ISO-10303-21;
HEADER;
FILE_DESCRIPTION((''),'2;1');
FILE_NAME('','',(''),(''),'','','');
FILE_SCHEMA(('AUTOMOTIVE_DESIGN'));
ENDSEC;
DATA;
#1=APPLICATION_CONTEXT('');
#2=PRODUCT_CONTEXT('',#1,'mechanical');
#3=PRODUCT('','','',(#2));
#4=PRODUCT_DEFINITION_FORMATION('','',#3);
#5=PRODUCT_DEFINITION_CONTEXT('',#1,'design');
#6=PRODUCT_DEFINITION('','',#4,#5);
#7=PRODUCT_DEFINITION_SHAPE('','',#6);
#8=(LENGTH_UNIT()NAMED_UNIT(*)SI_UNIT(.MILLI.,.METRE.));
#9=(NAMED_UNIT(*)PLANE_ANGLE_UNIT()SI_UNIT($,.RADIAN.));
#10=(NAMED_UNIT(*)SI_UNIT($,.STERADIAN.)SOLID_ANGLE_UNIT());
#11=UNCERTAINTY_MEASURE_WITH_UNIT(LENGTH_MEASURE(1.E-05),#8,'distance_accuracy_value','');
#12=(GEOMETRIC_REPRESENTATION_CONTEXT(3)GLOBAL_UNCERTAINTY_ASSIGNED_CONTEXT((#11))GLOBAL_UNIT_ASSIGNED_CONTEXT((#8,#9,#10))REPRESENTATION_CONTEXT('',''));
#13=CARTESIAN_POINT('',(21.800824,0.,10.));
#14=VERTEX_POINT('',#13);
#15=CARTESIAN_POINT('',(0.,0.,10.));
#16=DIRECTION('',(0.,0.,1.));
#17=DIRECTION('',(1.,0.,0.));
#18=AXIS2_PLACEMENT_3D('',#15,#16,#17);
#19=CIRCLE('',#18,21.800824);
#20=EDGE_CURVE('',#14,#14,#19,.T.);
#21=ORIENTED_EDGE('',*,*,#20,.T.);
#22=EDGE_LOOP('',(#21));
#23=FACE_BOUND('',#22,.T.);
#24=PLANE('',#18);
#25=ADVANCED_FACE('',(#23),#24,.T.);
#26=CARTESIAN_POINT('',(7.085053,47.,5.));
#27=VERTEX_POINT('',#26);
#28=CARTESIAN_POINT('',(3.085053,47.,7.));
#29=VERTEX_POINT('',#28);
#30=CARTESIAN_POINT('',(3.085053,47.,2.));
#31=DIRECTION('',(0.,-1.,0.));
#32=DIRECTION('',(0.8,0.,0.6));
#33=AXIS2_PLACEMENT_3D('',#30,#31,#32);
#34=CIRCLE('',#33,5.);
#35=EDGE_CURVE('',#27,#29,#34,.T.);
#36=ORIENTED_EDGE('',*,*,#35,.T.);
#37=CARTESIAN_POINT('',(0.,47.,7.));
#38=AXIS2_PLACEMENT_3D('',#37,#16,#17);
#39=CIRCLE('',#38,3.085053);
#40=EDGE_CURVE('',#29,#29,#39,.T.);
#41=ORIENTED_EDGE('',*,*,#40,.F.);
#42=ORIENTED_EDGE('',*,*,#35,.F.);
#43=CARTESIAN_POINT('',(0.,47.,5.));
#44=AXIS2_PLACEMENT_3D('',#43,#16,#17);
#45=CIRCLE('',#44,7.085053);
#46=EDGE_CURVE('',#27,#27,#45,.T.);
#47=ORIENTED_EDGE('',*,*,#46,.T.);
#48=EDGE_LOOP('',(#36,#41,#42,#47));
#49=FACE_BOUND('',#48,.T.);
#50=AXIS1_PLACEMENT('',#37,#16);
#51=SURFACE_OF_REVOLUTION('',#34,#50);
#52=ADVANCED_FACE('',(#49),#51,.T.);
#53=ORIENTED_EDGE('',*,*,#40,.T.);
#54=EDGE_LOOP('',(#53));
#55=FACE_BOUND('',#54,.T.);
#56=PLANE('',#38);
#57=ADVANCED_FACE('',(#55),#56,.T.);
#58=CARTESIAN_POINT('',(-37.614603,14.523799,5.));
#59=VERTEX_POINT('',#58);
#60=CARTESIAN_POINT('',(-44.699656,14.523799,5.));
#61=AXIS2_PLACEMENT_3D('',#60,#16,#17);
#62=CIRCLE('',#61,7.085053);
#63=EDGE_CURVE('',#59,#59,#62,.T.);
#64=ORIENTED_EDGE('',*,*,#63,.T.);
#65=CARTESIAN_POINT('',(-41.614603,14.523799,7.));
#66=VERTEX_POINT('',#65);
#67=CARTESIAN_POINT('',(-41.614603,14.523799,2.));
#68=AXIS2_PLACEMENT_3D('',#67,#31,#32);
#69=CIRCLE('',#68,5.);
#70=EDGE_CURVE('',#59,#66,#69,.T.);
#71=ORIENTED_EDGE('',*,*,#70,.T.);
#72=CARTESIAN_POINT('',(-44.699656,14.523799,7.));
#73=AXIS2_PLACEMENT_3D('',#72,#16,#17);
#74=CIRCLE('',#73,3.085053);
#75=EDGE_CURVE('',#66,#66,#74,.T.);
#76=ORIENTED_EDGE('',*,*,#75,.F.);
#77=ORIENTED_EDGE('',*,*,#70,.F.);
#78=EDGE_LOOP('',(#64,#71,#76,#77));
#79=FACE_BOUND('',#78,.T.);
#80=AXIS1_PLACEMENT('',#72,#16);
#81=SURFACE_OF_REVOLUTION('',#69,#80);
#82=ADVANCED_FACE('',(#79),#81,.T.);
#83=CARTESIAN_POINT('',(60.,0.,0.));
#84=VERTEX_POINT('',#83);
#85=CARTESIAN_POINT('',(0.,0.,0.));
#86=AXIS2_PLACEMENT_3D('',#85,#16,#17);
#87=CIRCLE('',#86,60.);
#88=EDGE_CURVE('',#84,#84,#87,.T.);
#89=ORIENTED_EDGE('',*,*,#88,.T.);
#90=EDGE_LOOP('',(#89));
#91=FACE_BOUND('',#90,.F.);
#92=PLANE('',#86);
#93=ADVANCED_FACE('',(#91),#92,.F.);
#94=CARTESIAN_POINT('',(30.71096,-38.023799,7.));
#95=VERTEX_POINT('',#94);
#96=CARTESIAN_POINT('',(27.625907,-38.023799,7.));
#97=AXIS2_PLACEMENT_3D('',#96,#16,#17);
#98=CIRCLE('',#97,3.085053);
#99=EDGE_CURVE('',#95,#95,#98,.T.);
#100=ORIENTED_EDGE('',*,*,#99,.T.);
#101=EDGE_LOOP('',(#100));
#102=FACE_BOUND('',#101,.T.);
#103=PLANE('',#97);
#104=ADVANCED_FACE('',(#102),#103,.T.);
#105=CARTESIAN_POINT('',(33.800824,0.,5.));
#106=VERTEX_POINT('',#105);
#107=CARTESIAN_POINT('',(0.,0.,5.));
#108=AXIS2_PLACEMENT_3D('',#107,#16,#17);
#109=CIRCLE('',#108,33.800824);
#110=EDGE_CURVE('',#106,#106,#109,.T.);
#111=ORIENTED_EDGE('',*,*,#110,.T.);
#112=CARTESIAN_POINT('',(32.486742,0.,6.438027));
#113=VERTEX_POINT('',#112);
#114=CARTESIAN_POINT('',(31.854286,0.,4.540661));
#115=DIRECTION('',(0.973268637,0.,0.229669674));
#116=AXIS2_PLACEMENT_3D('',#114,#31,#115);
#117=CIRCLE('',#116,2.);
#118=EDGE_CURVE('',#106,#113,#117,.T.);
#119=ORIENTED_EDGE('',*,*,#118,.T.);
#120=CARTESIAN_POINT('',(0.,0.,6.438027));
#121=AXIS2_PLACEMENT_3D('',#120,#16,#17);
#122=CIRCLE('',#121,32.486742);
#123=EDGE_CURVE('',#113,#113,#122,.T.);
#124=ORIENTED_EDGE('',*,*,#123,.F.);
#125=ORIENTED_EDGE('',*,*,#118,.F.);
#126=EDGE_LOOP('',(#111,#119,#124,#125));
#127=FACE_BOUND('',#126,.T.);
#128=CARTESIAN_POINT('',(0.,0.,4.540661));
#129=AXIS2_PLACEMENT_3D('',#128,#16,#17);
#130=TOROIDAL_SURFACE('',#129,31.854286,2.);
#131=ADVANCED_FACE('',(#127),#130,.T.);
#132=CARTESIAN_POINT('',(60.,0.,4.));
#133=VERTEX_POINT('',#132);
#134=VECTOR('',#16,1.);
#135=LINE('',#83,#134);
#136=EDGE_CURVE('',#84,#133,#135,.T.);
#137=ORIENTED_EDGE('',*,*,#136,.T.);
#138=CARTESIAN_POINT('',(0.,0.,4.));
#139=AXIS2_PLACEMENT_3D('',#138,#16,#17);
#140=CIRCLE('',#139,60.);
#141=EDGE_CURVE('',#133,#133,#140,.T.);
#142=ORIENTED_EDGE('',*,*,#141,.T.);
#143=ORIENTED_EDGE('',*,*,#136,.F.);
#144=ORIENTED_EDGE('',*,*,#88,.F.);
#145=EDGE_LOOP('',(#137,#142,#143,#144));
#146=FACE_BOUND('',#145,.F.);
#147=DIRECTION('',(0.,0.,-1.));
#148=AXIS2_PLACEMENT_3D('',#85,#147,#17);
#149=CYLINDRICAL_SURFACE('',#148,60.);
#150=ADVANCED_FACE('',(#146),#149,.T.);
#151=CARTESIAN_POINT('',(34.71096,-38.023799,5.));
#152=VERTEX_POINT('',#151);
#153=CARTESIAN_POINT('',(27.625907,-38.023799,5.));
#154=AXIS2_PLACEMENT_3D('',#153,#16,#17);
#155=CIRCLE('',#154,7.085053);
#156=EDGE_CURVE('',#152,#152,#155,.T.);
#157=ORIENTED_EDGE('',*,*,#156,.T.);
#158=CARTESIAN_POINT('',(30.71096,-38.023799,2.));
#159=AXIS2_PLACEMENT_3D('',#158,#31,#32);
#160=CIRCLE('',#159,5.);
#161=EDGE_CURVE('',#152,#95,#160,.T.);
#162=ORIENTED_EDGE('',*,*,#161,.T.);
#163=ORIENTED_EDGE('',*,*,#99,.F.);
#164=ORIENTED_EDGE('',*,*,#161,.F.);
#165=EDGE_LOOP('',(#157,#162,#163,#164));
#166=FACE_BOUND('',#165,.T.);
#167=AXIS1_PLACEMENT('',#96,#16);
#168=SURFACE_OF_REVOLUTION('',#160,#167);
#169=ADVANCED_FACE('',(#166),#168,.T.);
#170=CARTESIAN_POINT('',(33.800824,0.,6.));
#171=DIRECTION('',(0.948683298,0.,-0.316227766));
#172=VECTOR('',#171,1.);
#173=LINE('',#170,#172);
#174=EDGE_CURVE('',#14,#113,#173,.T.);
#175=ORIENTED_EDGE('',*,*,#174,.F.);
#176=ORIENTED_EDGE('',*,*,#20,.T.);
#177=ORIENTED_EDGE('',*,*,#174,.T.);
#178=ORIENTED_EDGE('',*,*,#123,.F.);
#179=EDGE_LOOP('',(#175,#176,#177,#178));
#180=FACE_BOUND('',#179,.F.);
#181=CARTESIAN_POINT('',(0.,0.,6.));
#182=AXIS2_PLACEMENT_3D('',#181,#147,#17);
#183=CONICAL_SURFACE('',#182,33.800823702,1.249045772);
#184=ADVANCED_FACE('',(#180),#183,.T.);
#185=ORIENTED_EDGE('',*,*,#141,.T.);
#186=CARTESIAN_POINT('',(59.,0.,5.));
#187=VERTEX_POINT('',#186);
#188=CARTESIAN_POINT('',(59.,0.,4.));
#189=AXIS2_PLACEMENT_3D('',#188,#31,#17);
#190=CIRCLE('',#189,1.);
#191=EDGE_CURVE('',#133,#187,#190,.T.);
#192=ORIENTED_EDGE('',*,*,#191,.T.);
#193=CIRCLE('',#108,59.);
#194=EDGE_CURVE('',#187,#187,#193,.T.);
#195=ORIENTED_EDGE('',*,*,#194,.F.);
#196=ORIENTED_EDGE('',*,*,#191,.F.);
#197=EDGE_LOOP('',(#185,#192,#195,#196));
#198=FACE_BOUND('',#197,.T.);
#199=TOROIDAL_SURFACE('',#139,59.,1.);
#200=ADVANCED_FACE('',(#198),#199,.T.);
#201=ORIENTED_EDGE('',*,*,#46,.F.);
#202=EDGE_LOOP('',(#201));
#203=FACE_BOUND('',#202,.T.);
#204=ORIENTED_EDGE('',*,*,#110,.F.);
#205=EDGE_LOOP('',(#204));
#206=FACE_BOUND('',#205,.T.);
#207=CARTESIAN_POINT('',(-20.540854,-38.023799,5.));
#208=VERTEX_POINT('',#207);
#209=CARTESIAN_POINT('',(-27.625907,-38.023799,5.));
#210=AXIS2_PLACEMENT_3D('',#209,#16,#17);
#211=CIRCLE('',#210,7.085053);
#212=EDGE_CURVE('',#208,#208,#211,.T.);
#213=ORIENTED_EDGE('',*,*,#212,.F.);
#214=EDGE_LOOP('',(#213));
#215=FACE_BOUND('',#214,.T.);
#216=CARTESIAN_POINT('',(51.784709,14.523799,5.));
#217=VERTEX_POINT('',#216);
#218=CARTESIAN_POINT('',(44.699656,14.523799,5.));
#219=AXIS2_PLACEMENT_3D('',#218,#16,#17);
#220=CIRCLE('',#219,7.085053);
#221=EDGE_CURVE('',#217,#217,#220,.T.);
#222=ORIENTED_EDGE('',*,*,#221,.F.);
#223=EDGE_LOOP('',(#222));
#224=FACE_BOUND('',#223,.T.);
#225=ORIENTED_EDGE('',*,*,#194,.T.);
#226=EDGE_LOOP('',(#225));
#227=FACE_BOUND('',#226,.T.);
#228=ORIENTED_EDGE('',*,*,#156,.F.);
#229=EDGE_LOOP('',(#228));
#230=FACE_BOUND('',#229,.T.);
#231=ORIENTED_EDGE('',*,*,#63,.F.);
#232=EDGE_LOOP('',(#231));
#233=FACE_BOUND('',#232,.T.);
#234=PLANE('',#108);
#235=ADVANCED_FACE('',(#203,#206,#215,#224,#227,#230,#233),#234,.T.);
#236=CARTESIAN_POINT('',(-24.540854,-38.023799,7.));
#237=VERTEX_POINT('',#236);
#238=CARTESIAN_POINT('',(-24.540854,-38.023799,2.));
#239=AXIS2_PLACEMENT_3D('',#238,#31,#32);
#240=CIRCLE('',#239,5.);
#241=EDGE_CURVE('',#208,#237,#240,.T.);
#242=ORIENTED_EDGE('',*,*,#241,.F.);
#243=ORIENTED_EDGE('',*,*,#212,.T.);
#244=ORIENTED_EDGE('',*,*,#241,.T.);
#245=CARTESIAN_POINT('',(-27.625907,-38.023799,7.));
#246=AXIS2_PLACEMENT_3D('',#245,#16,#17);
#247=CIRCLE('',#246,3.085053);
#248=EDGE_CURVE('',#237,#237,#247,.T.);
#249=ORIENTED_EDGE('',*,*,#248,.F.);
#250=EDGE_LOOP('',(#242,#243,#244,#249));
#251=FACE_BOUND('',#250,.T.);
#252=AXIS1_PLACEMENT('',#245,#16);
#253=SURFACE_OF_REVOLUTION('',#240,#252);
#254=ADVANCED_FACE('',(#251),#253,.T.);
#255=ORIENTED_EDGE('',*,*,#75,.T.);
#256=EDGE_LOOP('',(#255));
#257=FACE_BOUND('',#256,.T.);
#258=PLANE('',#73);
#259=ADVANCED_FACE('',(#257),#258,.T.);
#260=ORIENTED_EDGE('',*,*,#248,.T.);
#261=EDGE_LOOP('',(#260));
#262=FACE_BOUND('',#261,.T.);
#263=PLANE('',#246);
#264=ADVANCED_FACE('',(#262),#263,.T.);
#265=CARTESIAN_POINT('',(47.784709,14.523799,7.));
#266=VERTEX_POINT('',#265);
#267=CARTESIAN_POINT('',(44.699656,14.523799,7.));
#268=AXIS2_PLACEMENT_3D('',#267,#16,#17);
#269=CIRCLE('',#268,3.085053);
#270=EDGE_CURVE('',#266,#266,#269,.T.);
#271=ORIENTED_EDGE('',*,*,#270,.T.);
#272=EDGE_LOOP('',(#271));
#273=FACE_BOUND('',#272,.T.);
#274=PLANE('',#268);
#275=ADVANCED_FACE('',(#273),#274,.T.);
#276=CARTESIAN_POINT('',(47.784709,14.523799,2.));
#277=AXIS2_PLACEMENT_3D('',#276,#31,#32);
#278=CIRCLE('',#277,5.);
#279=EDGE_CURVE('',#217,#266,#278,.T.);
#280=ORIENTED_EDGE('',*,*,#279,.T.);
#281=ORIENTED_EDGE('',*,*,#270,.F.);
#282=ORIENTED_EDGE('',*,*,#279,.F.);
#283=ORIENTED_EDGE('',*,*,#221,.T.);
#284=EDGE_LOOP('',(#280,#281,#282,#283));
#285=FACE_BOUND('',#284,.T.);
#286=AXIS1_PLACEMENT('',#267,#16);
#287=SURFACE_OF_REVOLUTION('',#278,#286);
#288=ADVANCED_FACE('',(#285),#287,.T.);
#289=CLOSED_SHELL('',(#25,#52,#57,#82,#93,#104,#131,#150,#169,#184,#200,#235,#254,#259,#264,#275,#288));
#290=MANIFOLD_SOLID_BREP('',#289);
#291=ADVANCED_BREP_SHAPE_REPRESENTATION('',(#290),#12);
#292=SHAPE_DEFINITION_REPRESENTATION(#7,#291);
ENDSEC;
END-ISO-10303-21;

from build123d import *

# Parameters (mm, degrees)
F0_R     = 60
F1_DEPTH = 5
F2_R     = 1
F3_R     = 7.0850530083
F4_DEPTH = 2
F6_R     = 33.800823702
F7_DEPTH = 5
F8_SIZE2 = 4
F8_SIZE  = 12


# Not quite as in the source:
# - a fillet or chamfer that OpenCascade refuses, or shapes differently, is made with other operations: its cross-section is extruded or revolved along the edge and cut away or added
# - a feature names something its author has since deleted; it is built from what else it names


with BuildPart() as f1:
    # F0 (on Top) → F1 (new body)
    with BuildSketch(Plane.XY):
        Circle(F0_R)
    extrude(amount=F1_DEPTH)

    # F2
    f2_edges = [f1.edges().sort_by_distance(p)[0] for p in [
        (-60, 0, 5),
    ]]
    fillet(f2_edges, radius=F2_R)

    # F3 (on face) → F4 (join)
    with BuildSketch(Plane.XY.offset(5)):
        with Locations((0, 47)):
            Circle(F3_R)
        with Locations((-44.6996562659, 14.5237987356)):
            Circle(F3_R)
        with Locations((-27.6259068577, -38.0237987356)):
            Circle(F3_R)
        with Locations((27.6259068577, -38.0237987356)):
            Circle(F3_R)
        with Locations((44.6996562659, 14.5237987356)):
            Circle(F3_R)
    extrude(amount=F4_DEPTH)

    # F5: fillet of radius 5 on 5 edges, made by hand

    # F5_s1 → F5_t2 (revolve, cut)
    with BuildSketch(Plane.XZ.offset(-47)):
        with BuildLine():
            ThreePointArc((7.0850530083, 5), (5.3211209858, 6.472135955), (3.0850530083, 7))
            Line((3.0850530083, 7), (7.0850530083, 7))
            Line((7.0850530083, 7), (7.0850530083, 5))
        make_face()
    revolve(axis=Axis((0, 47, 7), (0, 0, 1)), mode=Mode.SUBTRACT)

    # F5_s3 → F5_t4 (revolve, cut)
    with BuildSketch(Plane.XZ.offset(-14.5237987356)):
        with BuildLine():
            ThreePointArc((51.7847092742, 5), (50.0207772517, 6.472135955), (47.7847092742, 7))
            Line((47.7847092742, 7), (51.7847092742, 7))
            Line((51.7847092742, 7), (51.7847092742, 5))
        make_face()
    revolve(axis=Axis((44.6996562659, 14.5237987356, 7), (0, 0, 1)), mode=Mode.SUBTRACT)

    # F5_s5 → F5_t6 (revolve, cut)
    with BuildSketch(Plane.XZ.offset(38.0237987356)):
        with BuildLine():
            ThreePointArc((34.7109598661, 5), (32.9470278436, 6.472135955), (30.7109598661, 7))
            Line((30.7109598661, 7), (34.7109598661, 7))
            Line((34.7109598661, 7), (34.7109598661, 5))
        make_face()
    revolve(axis=Axis((27.6259068577, -38.0237987356, 7), (0, 0, 1)), mode=Mode.SUBTRACT)

    # F5_s7 → F5_t8 (revolve, cut)
    with BuildSketch(Plane.XZ.offset(38.0237987356)):
        with BuildLine():
            ThreePointArc((-20.5408538494, 5), (-22.3047858719, 6.472135955), (-24.5408538494, 7))
            Line((-24.5408538494, 7), (-20.5408538494, 7))
            Line((-20.5408538494, 7), (-20.5408538494, 5))
        make_face()
    revolve(axis=Axis((-27.6259068577, -38.0237987356, 7), (0, 0, 1)), mode=Mode.SUBTRACT)

    # F5_s9 → F5_t10 (revolve, cut)
    with BuildSketch(Plane.XZ.offset(-14.5237987356)):
        with BuildLine():
            ThreePointArc((-37.6146032575, 5), (-39.37853528, 6.472135955), (-41.6146032575, 7))
            Line((-41.6146032575, 7), (-37.6146032575, 7))
            Line((-37.6146032575, 7), (-37.6146032575, 5))
        make_face()
    revolve(axis=Axis((-44.6996562659, 14.5237987356, 7), (0, 0, 1)), mode=Mode.SUBTRACT)

    # F6 (on face) → F7 (join)
    with BuildSketch(Plane.XY.offset(5)):
        Circle(F6_R)
    extrude(amount=F7_DEPTH)

    # F8
    f8_edges = [f1.edges().sort_by_distance(p)[0] for p in [
        (-33.800824, 0, 10),
    ]]
    f8_side = f1.faces().sort_by_distance((0, 0, 10))[0]
    chamfer(f8_edges, length=F8_SIZE, length2=F8_SIZE2, reference=f8_side)

    # F9: fillet of radius 2 on 1 edges, made by hand

    # F9_s1 → F9_t2 (revolve, cut)
    with BuildSketch(Plane.XZ):
        with BuildLine():
            ThreePointArc((33.800823702, 5), (33.33069476, 5.8898153625), (32.486741959, 6.4380272477))
            Line((32.486741959, 6.4380272477), (33.800823702, 6))
            Line((33.800823702, 6), (33.800823702, 5))
        make_face()
    revolve(axis=Axis((0, 0, 6), (0, 0, 1)), mode=Mode.SUBTRACT)


solid = f1.part
